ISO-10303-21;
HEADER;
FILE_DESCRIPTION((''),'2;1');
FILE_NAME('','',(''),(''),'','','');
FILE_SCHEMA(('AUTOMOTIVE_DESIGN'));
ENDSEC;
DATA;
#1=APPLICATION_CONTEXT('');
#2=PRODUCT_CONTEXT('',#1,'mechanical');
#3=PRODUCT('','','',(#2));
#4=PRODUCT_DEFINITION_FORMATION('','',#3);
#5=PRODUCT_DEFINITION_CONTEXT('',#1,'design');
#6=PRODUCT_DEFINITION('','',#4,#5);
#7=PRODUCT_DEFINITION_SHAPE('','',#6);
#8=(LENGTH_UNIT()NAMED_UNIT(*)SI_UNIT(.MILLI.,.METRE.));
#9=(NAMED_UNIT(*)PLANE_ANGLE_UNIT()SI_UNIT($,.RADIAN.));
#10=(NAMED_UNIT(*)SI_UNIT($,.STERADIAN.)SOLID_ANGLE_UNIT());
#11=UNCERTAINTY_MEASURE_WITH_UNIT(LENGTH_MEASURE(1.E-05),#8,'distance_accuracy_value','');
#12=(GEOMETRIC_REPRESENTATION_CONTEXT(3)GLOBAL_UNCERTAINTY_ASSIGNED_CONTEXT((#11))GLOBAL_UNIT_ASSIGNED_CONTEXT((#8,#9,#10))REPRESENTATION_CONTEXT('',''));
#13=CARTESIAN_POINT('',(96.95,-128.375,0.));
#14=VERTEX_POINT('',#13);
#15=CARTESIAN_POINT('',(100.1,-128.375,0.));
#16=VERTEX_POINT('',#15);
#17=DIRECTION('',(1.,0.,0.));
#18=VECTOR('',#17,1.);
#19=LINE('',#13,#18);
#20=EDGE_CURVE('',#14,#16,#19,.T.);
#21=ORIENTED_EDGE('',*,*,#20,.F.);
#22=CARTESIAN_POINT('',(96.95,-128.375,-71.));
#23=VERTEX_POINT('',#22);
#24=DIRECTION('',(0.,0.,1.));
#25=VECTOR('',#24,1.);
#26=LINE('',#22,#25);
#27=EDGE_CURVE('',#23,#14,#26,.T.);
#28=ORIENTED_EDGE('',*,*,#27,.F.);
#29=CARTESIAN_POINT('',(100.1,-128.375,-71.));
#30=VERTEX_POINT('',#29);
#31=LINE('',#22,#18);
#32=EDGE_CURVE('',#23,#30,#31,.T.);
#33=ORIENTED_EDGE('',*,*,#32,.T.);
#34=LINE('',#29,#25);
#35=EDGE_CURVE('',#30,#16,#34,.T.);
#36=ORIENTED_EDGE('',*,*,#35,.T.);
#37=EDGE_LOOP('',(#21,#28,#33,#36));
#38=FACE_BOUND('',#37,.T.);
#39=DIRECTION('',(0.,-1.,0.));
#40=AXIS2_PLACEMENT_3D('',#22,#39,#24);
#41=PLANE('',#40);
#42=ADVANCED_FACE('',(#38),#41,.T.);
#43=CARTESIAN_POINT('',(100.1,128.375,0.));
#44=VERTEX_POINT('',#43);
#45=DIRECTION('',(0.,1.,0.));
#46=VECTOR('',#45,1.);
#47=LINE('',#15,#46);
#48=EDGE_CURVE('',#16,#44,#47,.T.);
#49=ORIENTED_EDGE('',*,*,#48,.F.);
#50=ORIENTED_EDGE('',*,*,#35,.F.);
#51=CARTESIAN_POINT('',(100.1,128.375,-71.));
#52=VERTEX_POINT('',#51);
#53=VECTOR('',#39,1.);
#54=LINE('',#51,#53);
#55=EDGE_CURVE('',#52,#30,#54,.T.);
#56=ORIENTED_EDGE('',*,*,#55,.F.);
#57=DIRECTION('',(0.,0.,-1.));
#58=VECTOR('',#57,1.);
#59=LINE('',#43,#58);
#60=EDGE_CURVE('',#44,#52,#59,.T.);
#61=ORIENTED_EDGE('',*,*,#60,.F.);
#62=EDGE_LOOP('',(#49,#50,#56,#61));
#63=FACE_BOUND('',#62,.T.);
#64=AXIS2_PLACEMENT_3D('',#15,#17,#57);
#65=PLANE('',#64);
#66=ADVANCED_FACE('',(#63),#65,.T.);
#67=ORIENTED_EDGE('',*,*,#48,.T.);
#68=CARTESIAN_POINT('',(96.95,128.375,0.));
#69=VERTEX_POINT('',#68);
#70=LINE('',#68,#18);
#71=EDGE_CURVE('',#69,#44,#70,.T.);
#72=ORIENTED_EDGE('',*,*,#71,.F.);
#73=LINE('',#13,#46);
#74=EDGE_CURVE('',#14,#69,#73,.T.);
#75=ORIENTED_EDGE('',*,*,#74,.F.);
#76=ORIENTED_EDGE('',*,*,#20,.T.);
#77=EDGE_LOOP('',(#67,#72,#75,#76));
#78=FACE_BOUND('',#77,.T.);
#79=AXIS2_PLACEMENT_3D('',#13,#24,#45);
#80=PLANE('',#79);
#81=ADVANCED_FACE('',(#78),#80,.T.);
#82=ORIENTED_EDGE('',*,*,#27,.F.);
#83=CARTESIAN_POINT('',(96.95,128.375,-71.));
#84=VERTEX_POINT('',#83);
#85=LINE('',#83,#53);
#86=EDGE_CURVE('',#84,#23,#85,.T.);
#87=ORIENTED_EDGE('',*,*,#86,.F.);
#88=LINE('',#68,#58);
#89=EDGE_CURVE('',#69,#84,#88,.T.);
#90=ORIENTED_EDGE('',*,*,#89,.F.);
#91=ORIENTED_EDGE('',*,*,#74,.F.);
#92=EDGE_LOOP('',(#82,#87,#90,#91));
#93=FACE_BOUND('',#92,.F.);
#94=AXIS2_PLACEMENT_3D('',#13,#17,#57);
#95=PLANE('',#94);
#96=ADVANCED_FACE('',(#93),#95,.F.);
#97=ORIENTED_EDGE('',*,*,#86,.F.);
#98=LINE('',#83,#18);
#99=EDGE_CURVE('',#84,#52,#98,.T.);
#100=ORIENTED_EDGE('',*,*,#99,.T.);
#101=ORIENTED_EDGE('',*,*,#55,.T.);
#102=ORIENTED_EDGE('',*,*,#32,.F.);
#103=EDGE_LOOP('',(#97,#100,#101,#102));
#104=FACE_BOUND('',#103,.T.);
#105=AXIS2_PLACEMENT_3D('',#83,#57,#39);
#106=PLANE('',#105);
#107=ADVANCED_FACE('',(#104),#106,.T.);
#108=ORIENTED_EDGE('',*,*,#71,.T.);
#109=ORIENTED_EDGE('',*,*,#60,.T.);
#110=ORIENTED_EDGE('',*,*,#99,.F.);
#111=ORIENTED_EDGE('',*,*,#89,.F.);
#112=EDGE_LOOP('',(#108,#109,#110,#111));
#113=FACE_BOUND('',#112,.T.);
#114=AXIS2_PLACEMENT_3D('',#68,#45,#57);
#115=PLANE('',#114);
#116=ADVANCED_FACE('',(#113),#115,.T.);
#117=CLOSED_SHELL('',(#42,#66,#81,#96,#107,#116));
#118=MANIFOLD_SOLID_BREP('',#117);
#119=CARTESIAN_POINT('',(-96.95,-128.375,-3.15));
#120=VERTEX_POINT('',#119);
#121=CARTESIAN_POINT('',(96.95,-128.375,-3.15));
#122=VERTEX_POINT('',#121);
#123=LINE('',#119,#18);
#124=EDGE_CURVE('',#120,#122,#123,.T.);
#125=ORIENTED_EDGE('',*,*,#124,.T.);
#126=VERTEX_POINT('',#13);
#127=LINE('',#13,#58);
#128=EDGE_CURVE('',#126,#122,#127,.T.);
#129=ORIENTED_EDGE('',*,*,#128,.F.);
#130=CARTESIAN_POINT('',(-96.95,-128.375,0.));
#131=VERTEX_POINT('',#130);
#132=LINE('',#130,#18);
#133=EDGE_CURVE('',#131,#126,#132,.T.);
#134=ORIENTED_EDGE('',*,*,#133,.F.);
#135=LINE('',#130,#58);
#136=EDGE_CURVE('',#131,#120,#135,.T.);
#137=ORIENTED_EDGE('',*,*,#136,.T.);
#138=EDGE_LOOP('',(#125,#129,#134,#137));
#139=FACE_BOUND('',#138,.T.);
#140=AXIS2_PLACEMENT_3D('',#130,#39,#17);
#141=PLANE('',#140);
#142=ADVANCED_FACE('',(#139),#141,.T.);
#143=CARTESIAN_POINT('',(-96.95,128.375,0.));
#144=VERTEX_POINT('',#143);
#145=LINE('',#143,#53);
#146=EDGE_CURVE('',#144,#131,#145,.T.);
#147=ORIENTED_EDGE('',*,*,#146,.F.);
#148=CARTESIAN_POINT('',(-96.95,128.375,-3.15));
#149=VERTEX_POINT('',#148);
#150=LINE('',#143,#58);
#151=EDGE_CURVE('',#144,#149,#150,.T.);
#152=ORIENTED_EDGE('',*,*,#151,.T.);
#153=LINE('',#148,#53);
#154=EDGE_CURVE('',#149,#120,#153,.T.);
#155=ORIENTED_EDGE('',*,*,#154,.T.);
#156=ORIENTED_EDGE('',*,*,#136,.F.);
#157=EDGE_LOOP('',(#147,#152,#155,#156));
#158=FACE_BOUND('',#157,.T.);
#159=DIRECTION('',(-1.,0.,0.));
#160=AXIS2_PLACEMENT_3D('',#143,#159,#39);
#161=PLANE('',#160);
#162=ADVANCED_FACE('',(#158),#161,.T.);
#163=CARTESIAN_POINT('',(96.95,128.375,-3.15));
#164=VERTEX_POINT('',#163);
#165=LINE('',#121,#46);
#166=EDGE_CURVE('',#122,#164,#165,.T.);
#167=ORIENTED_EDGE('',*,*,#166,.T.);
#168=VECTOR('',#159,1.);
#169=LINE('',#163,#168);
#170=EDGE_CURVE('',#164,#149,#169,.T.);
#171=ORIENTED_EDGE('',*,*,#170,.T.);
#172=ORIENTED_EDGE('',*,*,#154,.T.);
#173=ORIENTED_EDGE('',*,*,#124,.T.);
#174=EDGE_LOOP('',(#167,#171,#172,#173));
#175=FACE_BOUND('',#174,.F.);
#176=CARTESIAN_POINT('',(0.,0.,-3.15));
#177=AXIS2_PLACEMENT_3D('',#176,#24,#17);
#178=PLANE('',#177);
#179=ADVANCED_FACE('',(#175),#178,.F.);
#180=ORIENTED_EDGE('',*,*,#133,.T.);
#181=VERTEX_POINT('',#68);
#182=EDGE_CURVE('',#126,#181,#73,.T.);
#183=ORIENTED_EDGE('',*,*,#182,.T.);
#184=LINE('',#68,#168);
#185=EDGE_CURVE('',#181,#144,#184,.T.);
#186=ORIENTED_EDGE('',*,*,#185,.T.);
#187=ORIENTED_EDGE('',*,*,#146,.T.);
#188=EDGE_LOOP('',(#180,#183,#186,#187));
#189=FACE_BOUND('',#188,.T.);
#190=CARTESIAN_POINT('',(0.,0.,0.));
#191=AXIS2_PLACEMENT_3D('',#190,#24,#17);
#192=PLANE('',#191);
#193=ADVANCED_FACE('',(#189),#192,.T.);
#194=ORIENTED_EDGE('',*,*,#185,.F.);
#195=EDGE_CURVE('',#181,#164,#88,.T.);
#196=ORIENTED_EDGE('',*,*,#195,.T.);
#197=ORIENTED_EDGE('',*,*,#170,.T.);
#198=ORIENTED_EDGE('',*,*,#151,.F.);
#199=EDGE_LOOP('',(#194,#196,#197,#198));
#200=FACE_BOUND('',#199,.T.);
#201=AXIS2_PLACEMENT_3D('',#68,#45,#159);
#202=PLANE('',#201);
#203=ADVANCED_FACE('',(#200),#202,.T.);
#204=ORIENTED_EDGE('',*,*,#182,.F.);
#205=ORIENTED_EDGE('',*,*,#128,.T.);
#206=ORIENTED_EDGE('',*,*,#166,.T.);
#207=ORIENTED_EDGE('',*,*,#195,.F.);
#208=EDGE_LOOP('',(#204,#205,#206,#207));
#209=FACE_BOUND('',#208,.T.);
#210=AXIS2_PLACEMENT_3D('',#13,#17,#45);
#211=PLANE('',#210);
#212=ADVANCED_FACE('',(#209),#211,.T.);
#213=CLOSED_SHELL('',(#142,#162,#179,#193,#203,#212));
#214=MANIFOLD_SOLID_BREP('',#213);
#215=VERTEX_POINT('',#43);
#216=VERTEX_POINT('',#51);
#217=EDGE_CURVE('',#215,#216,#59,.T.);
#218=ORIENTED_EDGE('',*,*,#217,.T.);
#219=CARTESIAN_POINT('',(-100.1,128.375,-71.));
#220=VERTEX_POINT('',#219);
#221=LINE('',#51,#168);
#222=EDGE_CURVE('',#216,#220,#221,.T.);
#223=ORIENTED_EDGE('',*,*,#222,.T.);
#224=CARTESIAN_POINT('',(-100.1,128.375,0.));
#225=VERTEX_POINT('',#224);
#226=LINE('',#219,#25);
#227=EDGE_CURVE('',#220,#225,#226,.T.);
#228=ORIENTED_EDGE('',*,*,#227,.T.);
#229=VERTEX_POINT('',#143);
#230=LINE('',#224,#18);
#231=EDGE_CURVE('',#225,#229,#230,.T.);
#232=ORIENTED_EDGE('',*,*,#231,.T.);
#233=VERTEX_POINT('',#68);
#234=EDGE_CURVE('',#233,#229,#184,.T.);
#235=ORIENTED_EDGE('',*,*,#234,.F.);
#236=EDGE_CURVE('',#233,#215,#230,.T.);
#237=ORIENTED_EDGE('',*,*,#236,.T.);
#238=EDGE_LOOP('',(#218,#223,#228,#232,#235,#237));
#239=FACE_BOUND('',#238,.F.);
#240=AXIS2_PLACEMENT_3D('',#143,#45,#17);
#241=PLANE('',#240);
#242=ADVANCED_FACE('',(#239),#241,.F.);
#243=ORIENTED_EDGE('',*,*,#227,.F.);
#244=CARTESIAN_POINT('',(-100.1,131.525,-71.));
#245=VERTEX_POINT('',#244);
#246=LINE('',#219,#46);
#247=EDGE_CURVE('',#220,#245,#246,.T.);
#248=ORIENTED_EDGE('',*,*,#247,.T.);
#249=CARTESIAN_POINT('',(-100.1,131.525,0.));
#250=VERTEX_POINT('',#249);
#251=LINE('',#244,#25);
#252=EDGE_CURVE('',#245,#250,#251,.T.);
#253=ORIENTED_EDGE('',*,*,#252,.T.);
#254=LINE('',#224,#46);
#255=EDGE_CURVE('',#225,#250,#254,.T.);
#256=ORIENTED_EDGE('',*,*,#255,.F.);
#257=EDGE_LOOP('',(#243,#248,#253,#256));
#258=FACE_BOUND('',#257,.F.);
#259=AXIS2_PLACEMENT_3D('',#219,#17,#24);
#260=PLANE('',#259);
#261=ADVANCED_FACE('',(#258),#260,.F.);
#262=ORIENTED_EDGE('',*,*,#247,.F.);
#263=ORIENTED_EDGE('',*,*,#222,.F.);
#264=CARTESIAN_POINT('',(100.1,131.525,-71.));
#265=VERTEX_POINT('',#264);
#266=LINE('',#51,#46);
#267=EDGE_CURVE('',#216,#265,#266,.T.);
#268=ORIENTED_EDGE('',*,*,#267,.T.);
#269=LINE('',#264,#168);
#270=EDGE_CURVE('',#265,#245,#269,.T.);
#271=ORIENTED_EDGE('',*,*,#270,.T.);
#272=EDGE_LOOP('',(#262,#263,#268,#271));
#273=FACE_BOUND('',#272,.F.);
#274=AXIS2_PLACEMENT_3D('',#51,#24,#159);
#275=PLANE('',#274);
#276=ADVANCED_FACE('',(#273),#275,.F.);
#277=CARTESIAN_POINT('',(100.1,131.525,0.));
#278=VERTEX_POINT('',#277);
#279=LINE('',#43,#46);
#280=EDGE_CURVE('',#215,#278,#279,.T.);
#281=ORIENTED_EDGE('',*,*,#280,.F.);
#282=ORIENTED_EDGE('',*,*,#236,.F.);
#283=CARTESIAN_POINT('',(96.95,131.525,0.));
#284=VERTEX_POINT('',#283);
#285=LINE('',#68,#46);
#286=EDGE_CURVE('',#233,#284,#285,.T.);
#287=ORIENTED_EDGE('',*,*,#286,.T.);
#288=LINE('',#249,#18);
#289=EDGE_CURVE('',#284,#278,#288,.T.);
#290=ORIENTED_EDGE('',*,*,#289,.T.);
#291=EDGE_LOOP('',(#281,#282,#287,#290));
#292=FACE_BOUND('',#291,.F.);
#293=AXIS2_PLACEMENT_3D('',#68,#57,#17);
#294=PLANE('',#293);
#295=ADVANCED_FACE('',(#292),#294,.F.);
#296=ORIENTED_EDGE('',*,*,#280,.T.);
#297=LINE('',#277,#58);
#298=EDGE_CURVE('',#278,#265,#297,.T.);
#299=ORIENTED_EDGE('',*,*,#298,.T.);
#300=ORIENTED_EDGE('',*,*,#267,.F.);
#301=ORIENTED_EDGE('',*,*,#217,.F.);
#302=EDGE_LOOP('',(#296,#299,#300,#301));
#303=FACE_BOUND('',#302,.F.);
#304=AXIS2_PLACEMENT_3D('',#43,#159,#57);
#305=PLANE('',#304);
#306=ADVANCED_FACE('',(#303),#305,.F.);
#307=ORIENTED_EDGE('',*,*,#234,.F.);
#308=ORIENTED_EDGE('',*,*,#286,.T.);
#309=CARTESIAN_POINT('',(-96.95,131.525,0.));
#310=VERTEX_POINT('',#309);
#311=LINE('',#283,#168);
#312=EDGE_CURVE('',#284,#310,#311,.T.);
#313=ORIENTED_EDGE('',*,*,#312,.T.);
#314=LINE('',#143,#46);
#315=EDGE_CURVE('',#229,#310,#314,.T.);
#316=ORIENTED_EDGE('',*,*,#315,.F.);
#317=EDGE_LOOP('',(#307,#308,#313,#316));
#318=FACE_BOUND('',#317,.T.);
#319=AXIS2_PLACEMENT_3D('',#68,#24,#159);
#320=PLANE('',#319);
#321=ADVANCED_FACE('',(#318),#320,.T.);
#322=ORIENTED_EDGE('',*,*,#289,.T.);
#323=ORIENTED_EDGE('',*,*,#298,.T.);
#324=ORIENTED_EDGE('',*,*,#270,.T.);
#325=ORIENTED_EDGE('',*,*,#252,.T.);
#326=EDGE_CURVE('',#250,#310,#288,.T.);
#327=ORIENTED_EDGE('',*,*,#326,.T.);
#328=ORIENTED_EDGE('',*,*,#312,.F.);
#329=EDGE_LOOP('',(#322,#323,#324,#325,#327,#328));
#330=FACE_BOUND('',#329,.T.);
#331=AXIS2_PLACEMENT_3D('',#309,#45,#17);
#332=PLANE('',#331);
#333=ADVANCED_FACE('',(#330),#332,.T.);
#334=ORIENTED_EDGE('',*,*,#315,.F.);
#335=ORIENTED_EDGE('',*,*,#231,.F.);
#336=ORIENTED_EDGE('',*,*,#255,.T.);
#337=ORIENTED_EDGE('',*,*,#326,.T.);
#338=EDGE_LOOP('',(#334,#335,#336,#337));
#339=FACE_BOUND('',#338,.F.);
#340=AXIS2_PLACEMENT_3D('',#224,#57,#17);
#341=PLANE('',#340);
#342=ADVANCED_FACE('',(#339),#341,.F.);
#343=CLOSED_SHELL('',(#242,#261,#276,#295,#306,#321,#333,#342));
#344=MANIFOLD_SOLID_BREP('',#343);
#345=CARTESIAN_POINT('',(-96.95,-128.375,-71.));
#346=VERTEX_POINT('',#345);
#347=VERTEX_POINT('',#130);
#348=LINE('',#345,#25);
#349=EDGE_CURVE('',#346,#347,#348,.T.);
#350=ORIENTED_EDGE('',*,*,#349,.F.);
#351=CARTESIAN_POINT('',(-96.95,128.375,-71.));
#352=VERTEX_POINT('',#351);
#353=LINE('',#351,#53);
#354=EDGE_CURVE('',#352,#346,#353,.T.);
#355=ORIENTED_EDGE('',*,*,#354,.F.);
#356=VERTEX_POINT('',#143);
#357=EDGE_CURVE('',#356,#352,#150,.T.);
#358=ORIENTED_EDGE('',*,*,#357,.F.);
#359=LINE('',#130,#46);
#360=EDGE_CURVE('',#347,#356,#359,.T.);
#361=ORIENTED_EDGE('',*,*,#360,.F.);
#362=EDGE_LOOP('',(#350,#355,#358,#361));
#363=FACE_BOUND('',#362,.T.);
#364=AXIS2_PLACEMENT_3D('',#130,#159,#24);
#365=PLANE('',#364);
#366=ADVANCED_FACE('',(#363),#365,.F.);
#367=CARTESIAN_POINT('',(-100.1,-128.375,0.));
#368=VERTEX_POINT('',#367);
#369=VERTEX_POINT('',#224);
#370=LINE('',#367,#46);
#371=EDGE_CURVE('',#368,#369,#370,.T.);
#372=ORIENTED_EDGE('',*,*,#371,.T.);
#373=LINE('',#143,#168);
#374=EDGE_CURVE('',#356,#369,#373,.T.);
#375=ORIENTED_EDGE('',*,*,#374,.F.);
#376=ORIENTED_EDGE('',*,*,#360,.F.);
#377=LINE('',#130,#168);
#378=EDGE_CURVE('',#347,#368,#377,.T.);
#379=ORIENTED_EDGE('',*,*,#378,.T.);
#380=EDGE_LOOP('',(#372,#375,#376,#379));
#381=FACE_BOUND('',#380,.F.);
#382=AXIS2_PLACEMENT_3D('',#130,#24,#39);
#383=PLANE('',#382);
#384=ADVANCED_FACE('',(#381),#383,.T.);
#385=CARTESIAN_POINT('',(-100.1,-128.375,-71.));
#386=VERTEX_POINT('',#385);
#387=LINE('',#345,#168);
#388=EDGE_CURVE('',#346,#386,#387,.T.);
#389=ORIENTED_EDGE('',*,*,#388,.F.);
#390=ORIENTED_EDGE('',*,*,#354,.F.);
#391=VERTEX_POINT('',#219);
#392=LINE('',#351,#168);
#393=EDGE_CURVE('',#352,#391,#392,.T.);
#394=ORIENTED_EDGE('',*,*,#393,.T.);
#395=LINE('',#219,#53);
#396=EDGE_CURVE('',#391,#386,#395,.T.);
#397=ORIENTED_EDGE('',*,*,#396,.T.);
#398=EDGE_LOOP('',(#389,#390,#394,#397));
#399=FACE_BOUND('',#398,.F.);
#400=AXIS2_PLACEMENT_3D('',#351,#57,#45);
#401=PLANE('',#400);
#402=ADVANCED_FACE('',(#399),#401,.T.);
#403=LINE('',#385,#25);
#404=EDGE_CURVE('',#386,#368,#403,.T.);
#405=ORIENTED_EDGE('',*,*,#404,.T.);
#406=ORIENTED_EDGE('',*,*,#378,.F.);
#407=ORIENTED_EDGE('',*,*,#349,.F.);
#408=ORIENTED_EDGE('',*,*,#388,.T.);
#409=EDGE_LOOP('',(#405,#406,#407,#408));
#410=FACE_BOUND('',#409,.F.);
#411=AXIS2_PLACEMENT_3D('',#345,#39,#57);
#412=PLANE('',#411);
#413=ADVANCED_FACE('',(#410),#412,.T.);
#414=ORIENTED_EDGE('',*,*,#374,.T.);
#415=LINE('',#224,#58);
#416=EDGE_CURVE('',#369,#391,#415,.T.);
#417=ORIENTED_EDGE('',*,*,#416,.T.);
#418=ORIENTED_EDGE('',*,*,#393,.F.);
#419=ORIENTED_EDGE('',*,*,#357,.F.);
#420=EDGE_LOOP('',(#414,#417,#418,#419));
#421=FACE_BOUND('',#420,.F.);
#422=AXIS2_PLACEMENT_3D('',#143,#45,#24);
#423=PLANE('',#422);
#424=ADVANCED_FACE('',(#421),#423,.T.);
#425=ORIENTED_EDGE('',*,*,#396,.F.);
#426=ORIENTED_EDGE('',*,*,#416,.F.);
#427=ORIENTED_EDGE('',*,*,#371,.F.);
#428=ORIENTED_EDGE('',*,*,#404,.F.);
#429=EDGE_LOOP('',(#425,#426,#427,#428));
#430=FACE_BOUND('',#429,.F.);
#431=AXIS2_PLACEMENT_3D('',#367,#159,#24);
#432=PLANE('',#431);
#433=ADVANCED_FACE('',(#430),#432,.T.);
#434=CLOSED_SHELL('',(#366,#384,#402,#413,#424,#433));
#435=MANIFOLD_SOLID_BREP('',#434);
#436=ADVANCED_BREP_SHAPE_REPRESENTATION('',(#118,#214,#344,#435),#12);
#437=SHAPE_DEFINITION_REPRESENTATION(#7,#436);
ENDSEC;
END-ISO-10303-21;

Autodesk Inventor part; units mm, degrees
ref_plane "YZ Plane" through (0, 0, 0) normal (1, 0, 0) x (0, 1, 0)
ref_plane "XZ Plane" through (0, 0, 0) normal (0, 1, 0) x (-1, 0, 0)
ref_plane "XY Plane" through (0, 0, 0) normal (0, 0, 1) x (1, 0, 0)
sketch "Sketch1" plane through (0, 0, 0) normal (0, 0, 1) x (1, 0, 0)
  line L0 (-96.95, -128.375) -> (96.95, -128.375)
  line L1 (96.95, -128.375) -> (96.95, 128.375)
  line L2 (96.95, 128.375) -> (-96.95, 128.375)
  line L3 (-96.95, 128.375) -> (-96.95, -128.375)
  line L4 (-96.95, -128.375) -> (96.95, 128.375) construction
  line L5 (96.95, -128.375) -> (-96.95, 128.375) construction
  point P0 (0, 0)
  dimension "d0" = 193.9
  dimension "d1" = 256.75
extrude "Extrusion1" add sketch "Sketch1" against normal blind 3.15
sketch "Sketch2" plane through (96.95, -128.375, 0) normal (1, 0, 0) x (0, 0, -1)
  line L0 (0, 256.75) -> (71, 256.75)
  line L1 (71, 256.75) -> (71, 0)
  line L2 (71, 0) -> (0, 0)
  line L3 (0, 0) -> (0, 256.75)
  point P0 (0, 128.375)
  dimension "d4" = 71
  dimension "d5" = 256.75
extrude "Extrusion2" add sketch "Sketch2" along normal blind 3.15 separate body
mirror "Mirror1" about plane through (0, 0, 0) normal (1, 0, 0) bodies 2
sketch "Sketch3" plane through (-96.95, 128.375, 0) normal (0, 1, 0) x (1, 0, 0)
  line L0 (193.9, 0) -> (0, 0) projected
  line L1 (-3.15, 0) -> (197.05, 0)
  line L2 (197.05, 0) -> (197.05, 71)
  line L3 (197.05, 71) -> (-3.15, 71)
  line L4 (-3.15, 71) -> (-3.15, 0)
  line L5 (-3.15, 71) -> (-3.15, 0) projected
  point P0 (96.95, 0)
  dimension "d8" = 200.2
  dimension "d9" = 71
extrude "Extrusion3" add sketch "Sketch3" along normal blind 3.15 separate body
equation "\"d0\" = shield_x - 2 * shield_t"
equation "\"d1\" = shield_z - shield_t"
equation "\"d2\" = shield_t"
equation "\"d4\" = shield_y"
equation "\"d5\" = shield_z - shield_t"
equation "\"d6\" = shield_t"
equation "\"d8\" = shield_x"
equation "\"d9\" = shield_y"
equation "\"d10\" = shield_t"
equation "\"laserresin\" = 5"
equation "\"st1_thickness\" = 0.91186"
equation "\"st2_thickness\" = 1.5875"
equation "\"al1_thickness\" = 0.79375"
equation "\"al2_thickness\" = 1.5875"
equation "\"bend_factor\" = 2.26205"
equation "\"st1_bend\" = 2.06267"
equation "\"st2_bend\" = 3.591"
equation "\"st3_bend\" = 113.10236"
equation "\"al1_bend\" = 1.7955"
equation "\"al2_bend\" = 3.591"
equation "\"al3_bend\" = 113.10236"
equation "\"acrylic1_thickness\" = 5.88"
equation "\"acrylic2_thickness\" = 3.15"
equation "\"acrylic3_thickness\" = 3.15"
equation "\"corner_small_r\" = 1"
equation "\"corner_big_r\" = 5"
equation "\"linear_bearing_spacing\" = 208"
equation "\"galvo_y_out_offset\" = 27"
equation "\"galvo_y_in_offset\" = 17.5"
equation "\"laser_diameter\" = 13"
equation "\"nema17_x\" = 43"
equation "\"nema17_shaft\" = 24"
equation "\"lmk8uu_x\" = 25"
equation "\"lmk8uu_shaft\" = 15"
equation "\"lmk8uu_z\" = 24"
equation "\"shf8_y\" = 43"
equation "\"acme_nut_d\" = 19.1"
equation "\"acme_nut_upper_d\" = 12.7"
equation "\"handle_spacing\" = 50.8"
equation "\"handle_d\" = 4.7625"
equation "\"handle_hole_d\" = 2.845"
equation "\"handle_projection\" = 20.6375"
equation "\"switch_spacing\" = 19"
equation "\"laser_body_diameter\" = 12"
equation "\"m3_diameter\" = 3"
equation "\"m3_head\" = 6"
equation "\"m4_diameter\" = 4"
equation "\"m5_diameter\" = 5"
equation "\"m5_head\" = 10.3"
equation "\"rivet1_diameter\" = 3.26"
equation "\"rivet2_diameter\" = 3.26"
equation "\"brass_insert_drill\" = 4"
equation "\"m5_brass_insert_drill\" = 6.7"
equation "\"m3_press_nut_drill\" = 4.5"
equation "\"m5_press_nut_drill\" = 6.5"
equation "\"platform_t\" = 1.5875"
equation "\"platform_z\" = 65"
equation "\"platform_fold_x\" = 15"
equation "\"platform_crane_gap\" = 0.1"
equation "\"platform_gap\" = 0.1"
equation "\"platform_upper_y\" = 46.625"
equation "\"crane_t\" = 1.5875"
equation "\"crane_x\" = 233"
equation "\"crane_gap\" = 0.1"
equation "\"tray_t\" = 5.88"
equation "\"tray_to_platform_oversize\" = 0"
equation "\"reservoir_t\" = 0.91186"
equation "\"reservoir_z\" = 35"
equation "\"reservoir_flap_y\" = 20.91186"
equation "\"frame_front_t\" = 0.91186"
equation "\"frame_front_y\" = 56"
equation "\"frame_front_fold\" = 15"
equation "\"frame_gap\" = 0.1"
equation "\"frame_back_t\" = 0.91186"
equation "\"frame_back_x\" = 277.97628"
equation "\"frame_back_y\" = 53.97628"
equation "\"frame_back_z\" = 497.97628"
equation "\"drawer_t\" = 0.91186"
equation "\"drawer_gap\" = 0.1"
equation "\"drawer_reservoir_overlap_x\" = 24.08814"
equation "\"drawer_x\" = 202.02372"
equation "\"drawer_y\" = 73"
equation "\"drawer_seal_y\" = 101"
equation "\"drawer_window_gap\" = 6"
equation "\"foot_t\" = 0.91186"
equation "\"foot_x\" = 198"
equation "\"foot_y\" = 196"
equation "\"laser_holder_t\" = 0.91186"
equation "\"laser_holder_z\" = 75"
equation "\"laser_offset_x\" = 59"
equation "\"laser_offset_y\" = 8.5"
equation "\"subframe_t\" = 0.79375"
equation "\"subframe_x\" = 66"
equation "\"subframe_y\" = 55"
equation "\"shield_x\" = 200.2"
equation "\"shield_y\" = 71"
equation "\"shield_z\" = 259.9"
equation "\"shield_t\" = 3.15"
equation "\"magnet_w\" = 12.8"
equation "\"magnet_t\" = 1.6"
equation "\"sae_4_40_diameter\" = 2.845"
properties part number "shield"
